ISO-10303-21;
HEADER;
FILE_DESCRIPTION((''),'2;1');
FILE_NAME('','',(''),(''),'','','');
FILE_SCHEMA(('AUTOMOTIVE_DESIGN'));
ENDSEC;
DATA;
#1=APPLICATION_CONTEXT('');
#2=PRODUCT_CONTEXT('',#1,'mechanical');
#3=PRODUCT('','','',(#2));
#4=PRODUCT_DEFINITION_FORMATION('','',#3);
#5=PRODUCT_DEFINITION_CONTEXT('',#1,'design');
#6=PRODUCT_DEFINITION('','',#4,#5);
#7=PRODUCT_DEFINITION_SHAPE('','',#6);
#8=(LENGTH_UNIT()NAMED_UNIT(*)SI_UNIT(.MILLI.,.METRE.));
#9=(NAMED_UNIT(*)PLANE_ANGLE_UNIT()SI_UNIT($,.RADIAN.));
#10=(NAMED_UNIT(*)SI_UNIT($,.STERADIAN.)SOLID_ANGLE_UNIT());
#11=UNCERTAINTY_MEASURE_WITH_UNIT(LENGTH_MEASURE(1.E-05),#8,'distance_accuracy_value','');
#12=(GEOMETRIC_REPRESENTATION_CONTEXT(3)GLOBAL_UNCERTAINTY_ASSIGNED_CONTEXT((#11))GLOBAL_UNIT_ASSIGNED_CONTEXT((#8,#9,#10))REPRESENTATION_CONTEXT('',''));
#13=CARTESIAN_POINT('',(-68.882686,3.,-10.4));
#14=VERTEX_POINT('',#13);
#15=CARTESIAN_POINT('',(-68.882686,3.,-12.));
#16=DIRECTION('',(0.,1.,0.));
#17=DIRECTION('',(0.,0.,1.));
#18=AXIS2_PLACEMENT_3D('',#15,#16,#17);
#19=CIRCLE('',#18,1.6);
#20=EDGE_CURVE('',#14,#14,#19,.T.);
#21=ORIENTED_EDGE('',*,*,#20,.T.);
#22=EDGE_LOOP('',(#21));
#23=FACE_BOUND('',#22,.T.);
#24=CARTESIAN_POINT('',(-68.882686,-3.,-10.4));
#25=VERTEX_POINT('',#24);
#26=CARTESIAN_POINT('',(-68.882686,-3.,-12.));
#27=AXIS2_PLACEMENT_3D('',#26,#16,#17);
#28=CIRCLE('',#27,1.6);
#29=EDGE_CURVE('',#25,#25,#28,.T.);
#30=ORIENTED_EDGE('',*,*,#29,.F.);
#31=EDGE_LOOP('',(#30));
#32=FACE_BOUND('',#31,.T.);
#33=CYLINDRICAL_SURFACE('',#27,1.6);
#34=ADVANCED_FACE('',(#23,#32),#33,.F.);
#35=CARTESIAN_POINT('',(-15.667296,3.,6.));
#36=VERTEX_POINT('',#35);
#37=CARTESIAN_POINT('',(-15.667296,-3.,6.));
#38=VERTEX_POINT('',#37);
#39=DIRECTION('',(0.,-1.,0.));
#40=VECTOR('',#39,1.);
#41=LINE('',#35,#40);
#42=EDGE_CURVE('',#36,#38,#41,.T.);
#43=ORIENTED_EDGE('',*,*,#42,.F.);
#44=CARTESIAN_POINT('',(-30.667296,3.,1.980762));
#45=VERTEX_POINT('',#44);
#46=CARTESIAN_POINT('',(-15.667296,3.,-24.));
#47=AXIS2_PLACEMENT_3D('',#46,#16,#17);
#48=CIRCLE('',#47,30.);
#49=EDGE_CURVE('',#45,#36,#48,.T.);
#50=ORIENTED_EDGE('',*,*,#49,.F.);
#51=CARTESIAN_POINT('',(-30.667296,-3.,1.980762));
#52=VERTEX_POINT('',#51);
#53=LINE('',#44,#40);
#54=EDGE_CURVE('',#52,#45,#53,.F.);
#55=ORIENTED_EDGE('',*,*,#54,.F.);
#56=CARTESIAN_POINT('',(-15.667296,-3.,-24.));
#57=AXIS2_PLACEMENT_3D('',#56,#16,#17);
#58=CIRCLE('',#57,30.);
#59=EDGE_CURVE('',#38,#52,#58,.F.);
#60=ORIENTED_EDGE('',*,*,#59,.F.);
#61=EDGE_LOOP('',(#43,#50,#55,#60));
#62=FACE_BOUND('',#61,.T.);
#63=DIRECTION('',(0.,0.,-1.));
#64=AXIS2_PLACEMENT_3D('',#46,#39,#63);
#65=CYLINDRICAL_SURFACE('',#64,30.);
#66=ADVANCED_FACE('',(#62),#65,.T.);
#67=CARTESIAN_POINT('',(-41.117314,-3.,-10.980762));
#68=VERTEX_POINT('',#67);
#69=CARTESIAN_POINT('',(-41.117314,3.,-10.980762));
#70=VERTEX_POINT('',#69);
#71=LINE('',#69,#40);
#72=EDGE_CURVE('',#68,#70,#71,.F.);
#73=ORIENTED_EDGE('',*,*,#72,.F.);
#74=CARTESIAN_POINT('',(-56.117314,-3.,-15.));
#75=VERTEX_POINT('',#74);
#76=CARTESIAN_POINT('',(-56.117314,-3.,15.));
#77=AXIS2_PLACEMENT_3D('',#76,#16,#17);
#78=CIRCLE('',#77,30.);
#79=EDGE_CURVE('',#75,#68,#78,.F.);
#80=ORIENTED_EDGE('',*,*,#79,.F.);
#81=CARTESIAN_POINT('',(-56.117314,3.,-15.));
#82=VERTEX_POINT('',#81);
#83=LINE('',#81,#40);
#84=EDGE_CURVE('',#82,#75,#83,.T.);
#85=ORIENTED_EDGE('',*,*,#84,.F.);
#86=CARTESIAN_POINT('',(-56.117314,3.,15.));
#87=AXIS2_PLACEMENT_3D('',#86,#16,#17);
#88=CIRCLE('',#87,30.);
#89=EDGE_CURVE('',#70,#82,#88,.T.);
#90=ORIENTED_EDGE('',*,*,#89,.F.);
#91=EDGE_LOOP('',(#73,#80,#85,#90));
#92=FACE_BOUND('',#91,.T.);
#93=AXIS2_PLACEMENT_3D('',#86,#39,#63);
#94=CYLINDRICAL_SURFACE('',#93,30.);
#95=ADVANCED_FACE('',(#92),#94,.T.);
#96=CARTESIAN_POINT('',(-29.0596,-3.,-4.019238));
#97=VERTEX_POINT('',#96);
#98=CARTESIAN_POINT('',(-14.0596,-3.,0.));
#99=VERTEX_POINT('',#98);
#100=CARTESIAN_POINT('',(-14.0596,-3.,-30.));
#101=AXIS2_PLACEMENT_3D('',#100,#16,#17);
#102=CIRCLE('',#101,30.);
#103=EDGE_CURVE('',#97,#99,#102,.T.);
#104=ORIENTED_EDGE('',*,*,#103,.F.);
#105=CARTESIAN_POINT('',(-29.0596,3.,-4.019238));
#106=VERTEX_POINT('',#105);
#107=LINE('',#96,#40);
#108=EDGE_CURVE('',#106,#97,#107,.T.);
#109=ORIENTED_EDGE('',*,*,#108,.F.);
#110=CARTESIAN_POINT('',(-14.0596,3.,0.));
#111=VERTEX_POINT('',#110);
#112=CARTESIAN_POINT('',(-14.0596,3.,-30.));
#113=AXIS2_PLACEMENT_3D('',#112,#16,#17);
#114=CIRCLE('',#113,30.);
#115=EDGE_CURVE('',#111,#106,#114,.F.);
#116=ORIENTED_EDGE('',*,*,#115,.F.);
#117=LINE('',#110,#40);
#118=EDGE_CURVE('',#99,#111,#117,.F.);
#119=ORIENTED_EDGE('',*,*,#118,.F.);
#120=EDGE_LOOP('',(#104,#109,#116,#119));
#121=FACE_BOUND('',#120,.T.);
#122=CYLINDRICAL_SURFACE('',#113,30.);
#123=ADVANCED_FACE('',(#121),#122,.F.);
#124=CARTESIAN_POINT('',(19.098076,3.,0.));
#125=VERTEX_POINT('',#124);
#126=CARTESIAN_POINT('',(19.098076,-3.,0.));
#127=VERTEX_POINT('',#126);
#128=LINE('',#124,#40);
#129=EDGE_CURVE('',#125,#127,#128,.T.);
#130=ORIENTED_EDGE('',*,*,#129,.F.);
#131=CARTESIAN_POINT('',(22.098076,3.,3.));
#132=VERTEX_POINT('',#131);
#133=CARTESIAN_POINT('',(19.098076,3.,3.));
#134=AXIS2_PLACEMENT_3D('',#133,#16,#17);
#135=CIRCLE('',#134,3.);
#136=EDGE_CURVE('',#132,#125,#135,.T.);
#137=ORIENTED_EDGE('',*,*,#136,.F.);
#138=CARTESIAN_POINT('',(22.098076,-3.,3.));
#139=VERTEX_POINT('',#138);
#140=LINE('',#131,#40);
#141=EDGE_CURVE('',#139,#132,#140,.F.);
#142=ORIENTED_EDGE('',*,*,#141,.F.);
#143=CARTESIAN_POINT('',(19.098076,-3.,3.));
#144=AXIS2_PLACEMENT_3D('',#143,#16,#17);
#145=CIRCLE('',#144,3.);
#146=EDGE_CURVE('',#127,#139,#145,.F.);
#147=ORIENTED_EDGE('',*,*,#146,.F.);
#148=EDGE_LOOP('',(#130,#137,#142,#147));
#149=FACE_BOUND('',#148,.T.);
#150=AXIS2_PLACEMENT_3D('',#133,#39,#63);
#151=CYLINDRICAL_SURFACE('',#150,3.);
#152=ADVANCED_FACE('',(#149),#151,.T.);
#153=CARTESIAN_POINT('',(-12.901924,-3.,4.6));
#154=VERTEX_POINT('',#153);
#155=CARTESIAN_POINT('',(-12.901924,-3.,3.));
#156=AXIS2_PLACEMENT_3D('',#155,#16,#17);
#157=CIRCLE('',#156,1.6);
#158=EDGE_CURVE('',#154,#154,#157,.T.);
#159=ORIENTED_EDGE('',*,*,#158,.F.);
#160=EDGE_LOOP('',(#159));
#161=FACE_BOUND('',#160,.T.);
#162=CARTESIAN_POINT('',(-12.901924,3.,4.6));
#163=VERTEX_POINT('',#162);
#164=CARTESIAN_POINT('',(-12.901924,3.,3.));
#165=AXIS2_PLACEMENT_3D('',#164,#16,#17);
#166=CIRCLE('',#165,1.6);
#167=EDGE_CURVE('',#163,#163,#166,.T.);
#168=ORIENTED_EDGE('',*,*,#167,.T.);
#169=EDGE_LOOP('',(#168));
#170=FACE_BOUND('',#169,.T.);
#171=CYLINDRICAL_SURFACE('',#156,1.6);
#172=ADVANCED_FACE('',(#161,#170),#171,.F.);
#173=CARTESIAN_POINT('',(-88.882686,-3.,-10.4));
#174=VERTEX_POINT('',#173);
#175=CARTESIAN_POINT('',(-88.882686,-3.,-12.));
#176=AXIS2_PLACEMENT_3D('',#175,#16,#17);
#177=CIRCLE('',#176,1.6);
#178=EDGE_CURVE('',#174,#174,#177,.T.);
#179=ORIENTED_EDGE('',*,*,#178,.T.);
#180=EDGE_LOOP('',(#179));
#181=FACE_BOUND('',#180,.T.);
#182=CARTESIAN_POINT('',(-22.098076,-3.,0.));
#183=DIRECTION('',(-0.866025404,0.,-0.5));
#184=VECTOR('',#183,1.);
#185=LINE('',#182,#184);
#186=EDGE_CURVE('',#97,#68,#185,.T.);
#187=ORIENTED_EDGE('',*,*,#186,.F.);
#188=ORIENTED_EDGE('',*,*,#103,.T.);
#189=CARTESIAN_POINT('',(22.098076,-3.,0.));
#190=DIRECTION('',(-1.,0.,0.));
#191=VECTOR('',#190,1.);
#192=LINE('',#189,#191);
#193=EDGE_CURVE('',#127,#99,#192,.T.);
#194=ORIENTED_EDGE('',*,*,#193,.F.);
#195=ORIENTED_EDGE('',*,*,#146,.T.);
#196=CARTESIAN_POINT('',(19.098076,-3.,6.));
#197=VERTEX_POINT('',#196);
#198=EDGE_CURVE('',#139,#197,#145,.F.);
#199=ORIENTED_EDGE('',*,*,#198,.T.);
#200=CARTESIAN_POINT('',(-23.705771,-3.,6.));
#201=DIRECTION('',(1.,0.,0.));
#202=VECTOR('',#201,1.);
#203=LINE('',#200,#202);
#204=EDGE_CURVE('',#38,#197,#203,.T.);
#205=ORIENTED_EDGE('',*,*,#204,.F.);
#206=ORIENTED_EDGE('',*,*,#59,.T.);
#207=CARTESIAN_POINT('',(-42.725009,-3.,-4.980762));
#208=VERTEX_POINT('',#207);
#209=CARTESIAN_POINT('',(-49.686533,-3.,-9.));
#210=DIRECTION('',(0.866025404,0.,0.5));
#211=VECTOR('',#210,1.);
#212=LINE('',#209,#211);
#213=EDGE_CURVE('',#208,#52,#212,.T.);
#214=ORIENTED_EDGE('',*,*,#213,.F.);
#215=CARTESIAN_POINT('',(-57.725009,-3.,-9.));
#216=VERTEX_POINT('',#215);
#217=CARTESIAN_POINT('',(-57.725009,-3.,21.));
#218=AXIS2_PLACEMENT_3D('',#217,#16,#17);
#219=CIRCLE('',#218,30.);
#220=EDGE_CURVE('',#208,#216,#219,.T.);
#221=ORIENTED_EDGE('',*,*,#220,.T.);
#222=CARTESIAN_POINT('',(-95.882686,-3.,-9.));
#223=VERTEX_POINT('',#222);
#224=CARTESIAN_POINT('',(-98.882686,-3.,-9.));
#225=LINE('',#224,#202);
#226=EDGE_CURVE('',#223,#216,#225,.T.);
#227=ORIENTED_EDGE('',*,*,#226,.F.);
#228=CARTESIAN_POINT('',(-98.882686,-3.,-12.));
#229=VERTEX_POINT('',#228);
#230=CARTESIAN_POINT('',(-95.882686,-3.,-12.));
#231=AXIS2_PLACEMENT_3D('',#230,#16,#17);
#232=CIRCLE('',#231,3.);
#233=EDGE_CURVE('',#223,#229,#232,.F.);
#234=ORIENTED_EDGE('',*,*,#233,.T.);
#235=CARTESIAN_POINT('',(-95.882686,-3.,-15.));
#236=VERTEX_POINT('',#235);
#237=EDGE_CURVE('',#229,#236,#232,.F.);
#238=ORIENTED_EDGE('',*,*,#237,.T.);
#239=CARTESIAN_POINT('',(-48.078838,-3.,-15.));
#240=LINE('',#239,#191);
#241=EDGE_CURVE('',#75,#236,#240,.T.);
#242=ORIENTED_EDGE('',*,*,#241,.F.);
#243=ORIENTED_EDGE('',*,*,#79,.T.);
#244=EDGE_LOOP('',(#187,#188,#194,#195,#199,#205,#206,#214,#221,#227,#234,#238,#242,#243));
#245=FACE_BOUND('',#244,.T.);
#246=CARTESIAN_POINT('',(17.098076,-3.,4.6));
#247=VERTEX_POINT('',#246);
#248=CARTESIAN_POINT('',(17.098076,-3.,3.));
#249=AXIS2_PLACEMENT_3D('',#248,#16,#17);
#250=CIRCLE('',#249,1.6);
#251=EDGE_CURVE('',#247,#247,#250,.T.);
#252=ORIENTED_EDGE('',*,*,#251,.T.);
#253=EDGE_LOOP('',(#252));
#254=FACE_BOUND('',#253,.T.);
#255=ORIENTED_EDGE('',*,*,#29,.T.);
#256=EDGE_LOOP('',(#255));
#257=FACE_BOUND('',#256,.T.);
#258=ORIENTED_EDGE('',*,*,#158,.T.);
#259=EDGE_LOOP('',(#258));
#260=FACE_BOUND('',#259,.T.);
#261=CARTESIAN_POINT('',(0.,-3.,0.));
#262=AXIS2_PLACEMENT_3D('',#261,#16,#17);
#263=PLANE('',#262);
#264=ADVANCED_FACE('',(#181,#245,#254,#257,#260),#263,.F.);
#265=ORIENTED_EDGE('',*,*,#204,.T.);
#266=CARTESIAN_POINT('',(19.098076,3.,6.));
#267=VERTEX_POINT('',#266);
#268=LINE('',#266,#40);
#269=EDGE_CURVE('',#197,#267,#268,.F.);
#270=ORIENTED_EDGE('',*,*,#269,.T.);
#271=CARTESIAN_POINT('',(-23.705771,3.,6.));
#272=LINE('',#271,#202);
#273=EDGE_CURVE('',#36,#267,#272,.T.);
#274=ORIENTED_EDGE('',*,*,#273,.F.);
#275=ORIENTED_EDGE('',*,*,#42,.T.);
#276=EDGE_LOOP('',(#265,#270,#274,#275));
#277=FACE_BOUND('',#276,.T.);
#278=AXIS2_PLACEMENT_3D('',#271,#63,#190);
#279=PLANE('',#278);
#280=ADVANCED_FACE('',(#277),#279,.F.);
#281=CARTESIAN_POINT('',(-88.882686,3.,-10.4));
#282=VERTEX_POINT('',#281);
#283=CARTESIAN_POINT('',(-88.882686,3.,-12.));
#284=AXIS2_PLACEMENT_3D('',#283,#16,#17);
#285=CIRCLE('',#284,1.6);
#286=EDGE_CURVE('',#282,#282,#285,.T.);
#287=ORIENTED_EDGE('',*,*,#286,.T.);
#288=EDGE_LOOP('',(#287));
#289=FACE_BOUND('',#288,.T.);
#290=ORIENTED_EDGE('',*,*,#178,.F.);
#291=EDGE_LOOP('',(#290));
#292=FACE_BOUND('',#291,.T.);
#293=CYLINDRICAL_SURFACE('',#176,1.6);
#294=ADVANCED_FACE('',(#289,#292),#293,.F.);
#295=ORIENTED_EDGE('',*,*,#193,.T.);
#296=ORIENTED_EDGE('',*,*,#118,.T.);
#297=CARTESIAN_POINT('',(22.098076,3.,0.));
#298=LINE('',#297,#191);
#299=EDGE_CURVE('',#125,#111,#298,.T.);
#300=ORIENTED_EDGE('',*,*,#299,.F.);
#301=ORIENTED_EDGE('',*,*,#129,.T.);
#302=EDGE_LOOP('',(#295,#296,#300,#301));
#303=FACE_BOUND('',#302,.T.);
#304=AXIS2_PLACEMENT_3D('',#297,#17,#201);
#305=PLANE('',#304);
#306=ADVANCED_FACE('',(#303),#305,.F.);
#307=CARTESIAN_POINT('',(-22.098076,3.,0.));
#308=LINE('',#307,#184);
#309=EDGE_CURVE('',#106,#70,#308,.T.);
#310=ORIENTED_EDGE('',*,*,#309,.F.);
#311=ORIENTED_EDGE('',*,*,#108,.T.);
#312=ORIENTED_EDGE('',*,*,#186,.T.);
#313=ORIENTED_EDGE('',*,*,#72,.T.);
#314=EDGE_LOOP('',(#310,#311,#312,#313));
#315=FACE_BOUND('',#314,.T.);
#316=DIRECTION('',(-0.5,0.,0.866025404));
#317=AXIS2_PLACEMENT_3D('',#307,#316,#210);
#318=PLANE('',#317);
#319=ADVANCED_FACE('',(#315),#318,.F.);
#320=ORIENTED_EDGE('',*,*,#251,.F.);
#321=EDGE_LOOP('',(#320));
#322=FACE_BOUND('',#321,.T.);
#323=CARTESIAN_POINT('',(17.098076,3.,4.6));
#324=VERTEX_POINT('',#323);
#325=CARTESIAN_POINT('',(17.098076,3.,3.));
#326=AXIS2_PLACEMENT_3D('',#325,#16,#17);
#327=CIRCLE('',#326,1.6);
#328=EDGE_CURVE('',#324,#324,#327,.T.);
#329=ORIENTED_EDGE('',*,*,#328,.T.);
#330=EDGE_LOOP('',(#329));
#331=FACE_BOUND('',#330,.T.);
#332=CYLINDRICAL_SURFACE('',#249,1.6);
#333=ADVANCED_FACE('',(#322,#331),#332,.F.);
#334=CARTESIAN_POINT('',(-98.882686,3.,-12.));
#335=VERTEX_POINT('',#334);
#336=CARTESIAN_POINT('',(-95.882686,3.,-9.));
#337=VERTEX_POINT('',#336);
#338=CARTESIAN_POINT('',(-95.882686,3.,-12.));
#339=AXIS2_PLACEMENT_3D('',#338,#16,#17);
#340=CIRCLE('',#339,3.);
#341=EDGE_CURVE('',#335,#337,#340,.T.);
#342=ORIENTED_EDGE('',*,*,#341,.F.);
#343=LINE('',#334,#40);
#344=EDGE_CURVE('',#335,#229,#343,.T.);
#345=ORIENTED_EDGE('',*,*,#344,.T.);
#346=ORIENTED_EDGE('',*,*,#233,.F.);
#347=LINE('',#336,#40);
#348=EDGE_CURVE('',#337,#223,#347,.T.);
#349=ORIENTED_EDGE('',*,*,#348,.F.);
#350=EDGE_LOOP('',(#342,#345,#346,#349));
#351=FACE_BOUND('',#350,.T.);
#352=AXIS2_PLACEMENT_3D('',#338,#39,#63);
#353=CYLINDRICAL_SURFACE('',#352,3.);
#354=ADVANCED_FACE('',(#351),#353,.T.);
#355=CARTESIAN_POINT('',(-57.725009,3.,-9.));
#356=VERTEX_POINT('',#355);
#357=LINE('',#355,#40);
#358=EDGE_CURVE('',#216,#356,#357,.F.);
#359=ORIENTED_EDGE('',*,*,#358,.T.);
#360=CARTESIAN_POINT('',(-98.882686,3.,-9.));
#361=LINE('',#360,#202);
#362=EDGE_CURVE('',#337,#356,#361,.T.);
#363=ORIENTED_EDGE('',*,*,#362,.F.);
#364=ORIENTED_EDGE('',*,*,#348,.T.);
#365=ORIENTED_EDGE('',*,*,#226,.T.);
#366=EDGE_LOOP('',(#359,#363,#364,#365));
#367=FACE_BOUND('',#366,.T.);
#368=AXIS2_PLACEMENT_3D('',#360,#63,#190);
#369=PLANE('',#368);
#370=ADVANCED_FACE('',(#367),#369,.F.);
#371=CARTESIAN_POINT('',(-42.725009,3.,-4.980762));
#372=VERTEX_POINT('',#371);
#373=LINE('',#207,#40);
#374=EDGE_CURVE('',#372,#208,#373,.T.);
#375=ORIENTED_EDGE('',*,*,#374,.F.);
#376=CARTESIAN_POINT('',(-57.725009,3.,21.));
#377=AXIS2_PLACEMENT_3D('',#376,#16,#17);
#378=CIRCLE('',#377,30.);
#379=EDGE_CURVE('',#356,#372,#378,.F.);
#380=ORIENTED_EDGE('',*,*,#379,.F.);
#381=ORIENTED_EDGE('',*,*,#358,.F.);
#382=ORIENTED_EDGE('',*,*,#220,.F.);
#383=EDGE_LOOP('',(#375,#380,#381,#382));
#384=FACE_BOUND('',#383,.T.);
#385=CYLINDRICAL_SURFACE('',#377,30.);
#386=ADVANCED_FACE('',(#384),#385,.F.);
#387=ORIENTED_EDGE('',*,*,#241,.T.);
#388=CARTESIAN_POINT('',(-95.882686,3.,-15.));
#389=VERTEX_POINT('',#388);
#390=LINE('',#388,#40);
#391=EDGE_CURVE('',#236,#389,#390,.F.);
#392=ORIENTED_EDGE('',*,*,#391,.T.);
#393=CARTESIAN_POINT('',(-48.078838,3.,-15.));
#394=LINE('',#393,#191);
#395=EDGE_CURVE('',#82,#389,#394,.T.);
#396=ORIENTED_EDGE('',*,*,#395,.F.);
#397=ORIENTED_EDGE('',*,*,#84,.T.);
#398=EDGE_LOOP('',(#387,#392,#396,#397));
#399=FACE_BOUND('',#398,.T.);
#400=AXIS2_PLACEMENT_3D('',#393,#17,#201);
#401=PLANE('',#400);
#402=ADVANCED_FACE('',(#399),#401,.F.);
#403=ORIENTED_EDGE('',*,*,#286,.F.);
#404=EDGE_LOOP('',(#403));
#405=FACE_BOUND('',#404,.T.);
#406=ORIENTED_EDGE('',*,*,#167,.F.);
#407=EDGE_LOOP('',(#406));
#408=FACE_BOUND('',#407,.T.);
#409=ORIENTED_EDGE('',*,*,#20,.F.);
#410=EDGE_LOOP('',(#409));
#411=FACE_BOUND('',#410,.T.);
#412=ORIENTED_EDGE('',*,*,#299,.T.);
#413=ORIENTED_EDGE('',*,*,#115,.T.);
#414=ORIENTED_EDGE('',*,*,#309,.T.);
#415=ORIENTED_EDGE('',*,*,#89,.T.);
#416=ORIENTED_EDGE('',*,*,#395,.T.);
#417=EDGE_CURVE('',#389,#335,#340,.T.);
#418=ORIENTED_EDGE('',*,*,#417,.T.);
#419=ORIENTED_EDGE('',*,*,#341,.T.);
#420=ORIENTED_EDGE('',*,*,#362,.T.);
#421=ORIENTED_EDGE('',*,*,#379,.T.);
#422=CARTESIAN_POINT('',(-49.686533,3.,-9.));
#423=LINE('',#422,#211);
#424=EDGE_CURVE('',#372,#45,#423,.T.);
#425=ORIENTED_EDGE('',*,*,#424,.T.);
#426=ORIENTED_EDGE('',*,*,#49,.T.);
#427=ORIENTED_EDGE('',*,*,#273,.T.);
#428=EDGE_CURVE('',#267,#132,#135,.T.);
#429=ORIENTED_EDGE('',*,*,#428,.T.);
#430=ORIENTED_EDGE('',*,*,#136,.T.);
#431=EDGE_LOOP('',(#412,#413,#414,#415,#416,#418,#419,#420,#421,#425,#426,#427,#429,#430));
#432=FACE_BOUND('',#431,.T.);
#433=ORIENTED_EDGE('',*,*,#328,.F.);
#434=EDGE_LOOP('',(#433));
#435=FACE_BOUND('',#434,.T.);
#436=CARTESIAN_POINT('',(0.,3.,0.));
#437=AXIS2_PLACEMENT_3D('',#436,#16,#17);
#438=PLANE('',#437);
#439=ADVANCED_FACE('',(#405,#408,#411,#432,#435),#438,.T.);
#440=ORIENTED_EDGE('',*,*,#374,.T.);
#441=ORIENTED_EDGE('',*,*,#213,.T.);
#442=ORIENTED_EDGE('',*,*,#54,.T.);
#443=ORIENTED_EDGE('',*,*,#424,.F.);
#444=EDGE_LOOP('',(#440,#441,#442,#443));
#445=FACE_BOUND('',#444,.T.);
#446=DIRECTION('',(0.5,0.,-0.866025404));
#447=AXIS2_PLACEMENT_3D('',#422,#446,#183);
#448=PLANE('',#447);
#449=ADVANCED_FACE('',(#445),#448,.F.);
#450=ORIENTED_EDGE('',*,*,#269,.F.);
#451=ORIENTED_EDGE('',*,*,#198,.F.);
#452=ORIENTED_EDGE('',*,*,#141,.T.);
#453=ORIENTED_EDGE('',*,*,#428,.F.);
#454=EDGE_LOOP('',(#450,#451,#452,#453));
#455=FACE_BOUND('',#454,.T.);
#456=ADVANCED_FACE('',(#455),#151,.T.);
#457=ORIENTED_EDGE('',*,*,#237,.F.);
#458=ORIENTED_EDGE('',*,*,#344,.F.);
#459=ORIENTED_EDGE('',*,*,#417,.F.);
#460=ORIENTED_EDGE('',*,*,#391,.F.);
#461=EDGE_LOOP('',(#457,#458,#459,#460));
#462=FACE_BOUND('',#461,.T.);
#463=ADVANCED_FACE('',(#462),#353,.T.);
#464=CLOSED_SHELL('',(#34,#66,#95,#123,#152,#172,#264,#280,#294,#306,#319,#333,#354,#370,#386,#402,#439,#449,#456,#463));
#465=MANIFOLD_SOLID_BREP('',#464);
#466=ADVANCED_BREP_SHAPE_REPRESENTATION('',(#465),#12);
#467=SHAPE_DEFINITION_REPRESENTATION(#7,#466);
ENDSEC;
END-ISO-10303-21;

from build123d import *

# Parameters (mm, degrees)
BOSS_EXTRUDE1_DEPTH = 3
SKETCH2_R           = 1.6
CUT_EXTRUDE1_DEPTH  = 101.19374018
FILLET1_R           = 30
FILLET2_R           = 3


with BuildPart() as part:
    # Sketch1 → Boss-Extrude1 (new, symmetric)
    with BuildSketch(Plane(origin=(0, 0, 0), x_dir=(1, 0, 0), z_dir=(0, 1, 0))):
        Polygon((22.098076211, 0), (-22.098076211, 0), (-48.078838325, 15), (-98.882685902, 15), (-98.882685902, 9), (-49.686533479, 9), (-23.705771366, -6), (22.098076211, -6), align=None)
    extrude(amount=BOSS_EXTRUDE1_DEPTH, both=True)

    # Sketch2 → Cut-Extrude1 (cut, through all)
    with BuildSketch(Plane(origin=(0, 3, 0), x_dir=(1, 0, 0), z_dir=(0, 1, 0))):
        with Locations(Location((17.098076211, -3, 0), (0, 0, 270))):
            Circle(SKETCH2_R)
        with Locations(Location((-12.901923789, -3, 0), (0, 0, 270))):
            Circle(SKETCH2_R)
        with Locations(Location((-68.882685902, 12, 0), (0, 0, 270))):
            Circle(SKETCH2_R)
        with Locations(Location((-88.882685902, 12, 0), (0, 0, 270))):
            Circle(SKETCH2_R)
    extrude(amount=-CUT_EXTRUDE1_DEPTH, mode=Mode.SUBTRACT)

    # Fillet1
    fillet1_edges = [part.edges().sort_by_distance(p)[0] for p in [
        (-22.098076211, 0, 0),
        (-23.705771366, 0, 6),
        (-49.686533479, 0, -9),
        (-48.078838325, 0, -15),
    ]]
    fillet(fillet1_edges, radius=FILLET1_R)

    # Fillet2
    fillet2_edges = [part.edges().sort_by_distance(p)[0] for p in [
        (-98.882685902, 0, -9),
        (-98.882685902, 0, -15),
        (22.098076211, 0, 6),
        (22.098076211, 0, 0),
    ]]
    fillet(fillet2_edges, radius=FILLET2_R - 0.0001)  # a hair under: the kernel refuses the full size


solid = part.part
